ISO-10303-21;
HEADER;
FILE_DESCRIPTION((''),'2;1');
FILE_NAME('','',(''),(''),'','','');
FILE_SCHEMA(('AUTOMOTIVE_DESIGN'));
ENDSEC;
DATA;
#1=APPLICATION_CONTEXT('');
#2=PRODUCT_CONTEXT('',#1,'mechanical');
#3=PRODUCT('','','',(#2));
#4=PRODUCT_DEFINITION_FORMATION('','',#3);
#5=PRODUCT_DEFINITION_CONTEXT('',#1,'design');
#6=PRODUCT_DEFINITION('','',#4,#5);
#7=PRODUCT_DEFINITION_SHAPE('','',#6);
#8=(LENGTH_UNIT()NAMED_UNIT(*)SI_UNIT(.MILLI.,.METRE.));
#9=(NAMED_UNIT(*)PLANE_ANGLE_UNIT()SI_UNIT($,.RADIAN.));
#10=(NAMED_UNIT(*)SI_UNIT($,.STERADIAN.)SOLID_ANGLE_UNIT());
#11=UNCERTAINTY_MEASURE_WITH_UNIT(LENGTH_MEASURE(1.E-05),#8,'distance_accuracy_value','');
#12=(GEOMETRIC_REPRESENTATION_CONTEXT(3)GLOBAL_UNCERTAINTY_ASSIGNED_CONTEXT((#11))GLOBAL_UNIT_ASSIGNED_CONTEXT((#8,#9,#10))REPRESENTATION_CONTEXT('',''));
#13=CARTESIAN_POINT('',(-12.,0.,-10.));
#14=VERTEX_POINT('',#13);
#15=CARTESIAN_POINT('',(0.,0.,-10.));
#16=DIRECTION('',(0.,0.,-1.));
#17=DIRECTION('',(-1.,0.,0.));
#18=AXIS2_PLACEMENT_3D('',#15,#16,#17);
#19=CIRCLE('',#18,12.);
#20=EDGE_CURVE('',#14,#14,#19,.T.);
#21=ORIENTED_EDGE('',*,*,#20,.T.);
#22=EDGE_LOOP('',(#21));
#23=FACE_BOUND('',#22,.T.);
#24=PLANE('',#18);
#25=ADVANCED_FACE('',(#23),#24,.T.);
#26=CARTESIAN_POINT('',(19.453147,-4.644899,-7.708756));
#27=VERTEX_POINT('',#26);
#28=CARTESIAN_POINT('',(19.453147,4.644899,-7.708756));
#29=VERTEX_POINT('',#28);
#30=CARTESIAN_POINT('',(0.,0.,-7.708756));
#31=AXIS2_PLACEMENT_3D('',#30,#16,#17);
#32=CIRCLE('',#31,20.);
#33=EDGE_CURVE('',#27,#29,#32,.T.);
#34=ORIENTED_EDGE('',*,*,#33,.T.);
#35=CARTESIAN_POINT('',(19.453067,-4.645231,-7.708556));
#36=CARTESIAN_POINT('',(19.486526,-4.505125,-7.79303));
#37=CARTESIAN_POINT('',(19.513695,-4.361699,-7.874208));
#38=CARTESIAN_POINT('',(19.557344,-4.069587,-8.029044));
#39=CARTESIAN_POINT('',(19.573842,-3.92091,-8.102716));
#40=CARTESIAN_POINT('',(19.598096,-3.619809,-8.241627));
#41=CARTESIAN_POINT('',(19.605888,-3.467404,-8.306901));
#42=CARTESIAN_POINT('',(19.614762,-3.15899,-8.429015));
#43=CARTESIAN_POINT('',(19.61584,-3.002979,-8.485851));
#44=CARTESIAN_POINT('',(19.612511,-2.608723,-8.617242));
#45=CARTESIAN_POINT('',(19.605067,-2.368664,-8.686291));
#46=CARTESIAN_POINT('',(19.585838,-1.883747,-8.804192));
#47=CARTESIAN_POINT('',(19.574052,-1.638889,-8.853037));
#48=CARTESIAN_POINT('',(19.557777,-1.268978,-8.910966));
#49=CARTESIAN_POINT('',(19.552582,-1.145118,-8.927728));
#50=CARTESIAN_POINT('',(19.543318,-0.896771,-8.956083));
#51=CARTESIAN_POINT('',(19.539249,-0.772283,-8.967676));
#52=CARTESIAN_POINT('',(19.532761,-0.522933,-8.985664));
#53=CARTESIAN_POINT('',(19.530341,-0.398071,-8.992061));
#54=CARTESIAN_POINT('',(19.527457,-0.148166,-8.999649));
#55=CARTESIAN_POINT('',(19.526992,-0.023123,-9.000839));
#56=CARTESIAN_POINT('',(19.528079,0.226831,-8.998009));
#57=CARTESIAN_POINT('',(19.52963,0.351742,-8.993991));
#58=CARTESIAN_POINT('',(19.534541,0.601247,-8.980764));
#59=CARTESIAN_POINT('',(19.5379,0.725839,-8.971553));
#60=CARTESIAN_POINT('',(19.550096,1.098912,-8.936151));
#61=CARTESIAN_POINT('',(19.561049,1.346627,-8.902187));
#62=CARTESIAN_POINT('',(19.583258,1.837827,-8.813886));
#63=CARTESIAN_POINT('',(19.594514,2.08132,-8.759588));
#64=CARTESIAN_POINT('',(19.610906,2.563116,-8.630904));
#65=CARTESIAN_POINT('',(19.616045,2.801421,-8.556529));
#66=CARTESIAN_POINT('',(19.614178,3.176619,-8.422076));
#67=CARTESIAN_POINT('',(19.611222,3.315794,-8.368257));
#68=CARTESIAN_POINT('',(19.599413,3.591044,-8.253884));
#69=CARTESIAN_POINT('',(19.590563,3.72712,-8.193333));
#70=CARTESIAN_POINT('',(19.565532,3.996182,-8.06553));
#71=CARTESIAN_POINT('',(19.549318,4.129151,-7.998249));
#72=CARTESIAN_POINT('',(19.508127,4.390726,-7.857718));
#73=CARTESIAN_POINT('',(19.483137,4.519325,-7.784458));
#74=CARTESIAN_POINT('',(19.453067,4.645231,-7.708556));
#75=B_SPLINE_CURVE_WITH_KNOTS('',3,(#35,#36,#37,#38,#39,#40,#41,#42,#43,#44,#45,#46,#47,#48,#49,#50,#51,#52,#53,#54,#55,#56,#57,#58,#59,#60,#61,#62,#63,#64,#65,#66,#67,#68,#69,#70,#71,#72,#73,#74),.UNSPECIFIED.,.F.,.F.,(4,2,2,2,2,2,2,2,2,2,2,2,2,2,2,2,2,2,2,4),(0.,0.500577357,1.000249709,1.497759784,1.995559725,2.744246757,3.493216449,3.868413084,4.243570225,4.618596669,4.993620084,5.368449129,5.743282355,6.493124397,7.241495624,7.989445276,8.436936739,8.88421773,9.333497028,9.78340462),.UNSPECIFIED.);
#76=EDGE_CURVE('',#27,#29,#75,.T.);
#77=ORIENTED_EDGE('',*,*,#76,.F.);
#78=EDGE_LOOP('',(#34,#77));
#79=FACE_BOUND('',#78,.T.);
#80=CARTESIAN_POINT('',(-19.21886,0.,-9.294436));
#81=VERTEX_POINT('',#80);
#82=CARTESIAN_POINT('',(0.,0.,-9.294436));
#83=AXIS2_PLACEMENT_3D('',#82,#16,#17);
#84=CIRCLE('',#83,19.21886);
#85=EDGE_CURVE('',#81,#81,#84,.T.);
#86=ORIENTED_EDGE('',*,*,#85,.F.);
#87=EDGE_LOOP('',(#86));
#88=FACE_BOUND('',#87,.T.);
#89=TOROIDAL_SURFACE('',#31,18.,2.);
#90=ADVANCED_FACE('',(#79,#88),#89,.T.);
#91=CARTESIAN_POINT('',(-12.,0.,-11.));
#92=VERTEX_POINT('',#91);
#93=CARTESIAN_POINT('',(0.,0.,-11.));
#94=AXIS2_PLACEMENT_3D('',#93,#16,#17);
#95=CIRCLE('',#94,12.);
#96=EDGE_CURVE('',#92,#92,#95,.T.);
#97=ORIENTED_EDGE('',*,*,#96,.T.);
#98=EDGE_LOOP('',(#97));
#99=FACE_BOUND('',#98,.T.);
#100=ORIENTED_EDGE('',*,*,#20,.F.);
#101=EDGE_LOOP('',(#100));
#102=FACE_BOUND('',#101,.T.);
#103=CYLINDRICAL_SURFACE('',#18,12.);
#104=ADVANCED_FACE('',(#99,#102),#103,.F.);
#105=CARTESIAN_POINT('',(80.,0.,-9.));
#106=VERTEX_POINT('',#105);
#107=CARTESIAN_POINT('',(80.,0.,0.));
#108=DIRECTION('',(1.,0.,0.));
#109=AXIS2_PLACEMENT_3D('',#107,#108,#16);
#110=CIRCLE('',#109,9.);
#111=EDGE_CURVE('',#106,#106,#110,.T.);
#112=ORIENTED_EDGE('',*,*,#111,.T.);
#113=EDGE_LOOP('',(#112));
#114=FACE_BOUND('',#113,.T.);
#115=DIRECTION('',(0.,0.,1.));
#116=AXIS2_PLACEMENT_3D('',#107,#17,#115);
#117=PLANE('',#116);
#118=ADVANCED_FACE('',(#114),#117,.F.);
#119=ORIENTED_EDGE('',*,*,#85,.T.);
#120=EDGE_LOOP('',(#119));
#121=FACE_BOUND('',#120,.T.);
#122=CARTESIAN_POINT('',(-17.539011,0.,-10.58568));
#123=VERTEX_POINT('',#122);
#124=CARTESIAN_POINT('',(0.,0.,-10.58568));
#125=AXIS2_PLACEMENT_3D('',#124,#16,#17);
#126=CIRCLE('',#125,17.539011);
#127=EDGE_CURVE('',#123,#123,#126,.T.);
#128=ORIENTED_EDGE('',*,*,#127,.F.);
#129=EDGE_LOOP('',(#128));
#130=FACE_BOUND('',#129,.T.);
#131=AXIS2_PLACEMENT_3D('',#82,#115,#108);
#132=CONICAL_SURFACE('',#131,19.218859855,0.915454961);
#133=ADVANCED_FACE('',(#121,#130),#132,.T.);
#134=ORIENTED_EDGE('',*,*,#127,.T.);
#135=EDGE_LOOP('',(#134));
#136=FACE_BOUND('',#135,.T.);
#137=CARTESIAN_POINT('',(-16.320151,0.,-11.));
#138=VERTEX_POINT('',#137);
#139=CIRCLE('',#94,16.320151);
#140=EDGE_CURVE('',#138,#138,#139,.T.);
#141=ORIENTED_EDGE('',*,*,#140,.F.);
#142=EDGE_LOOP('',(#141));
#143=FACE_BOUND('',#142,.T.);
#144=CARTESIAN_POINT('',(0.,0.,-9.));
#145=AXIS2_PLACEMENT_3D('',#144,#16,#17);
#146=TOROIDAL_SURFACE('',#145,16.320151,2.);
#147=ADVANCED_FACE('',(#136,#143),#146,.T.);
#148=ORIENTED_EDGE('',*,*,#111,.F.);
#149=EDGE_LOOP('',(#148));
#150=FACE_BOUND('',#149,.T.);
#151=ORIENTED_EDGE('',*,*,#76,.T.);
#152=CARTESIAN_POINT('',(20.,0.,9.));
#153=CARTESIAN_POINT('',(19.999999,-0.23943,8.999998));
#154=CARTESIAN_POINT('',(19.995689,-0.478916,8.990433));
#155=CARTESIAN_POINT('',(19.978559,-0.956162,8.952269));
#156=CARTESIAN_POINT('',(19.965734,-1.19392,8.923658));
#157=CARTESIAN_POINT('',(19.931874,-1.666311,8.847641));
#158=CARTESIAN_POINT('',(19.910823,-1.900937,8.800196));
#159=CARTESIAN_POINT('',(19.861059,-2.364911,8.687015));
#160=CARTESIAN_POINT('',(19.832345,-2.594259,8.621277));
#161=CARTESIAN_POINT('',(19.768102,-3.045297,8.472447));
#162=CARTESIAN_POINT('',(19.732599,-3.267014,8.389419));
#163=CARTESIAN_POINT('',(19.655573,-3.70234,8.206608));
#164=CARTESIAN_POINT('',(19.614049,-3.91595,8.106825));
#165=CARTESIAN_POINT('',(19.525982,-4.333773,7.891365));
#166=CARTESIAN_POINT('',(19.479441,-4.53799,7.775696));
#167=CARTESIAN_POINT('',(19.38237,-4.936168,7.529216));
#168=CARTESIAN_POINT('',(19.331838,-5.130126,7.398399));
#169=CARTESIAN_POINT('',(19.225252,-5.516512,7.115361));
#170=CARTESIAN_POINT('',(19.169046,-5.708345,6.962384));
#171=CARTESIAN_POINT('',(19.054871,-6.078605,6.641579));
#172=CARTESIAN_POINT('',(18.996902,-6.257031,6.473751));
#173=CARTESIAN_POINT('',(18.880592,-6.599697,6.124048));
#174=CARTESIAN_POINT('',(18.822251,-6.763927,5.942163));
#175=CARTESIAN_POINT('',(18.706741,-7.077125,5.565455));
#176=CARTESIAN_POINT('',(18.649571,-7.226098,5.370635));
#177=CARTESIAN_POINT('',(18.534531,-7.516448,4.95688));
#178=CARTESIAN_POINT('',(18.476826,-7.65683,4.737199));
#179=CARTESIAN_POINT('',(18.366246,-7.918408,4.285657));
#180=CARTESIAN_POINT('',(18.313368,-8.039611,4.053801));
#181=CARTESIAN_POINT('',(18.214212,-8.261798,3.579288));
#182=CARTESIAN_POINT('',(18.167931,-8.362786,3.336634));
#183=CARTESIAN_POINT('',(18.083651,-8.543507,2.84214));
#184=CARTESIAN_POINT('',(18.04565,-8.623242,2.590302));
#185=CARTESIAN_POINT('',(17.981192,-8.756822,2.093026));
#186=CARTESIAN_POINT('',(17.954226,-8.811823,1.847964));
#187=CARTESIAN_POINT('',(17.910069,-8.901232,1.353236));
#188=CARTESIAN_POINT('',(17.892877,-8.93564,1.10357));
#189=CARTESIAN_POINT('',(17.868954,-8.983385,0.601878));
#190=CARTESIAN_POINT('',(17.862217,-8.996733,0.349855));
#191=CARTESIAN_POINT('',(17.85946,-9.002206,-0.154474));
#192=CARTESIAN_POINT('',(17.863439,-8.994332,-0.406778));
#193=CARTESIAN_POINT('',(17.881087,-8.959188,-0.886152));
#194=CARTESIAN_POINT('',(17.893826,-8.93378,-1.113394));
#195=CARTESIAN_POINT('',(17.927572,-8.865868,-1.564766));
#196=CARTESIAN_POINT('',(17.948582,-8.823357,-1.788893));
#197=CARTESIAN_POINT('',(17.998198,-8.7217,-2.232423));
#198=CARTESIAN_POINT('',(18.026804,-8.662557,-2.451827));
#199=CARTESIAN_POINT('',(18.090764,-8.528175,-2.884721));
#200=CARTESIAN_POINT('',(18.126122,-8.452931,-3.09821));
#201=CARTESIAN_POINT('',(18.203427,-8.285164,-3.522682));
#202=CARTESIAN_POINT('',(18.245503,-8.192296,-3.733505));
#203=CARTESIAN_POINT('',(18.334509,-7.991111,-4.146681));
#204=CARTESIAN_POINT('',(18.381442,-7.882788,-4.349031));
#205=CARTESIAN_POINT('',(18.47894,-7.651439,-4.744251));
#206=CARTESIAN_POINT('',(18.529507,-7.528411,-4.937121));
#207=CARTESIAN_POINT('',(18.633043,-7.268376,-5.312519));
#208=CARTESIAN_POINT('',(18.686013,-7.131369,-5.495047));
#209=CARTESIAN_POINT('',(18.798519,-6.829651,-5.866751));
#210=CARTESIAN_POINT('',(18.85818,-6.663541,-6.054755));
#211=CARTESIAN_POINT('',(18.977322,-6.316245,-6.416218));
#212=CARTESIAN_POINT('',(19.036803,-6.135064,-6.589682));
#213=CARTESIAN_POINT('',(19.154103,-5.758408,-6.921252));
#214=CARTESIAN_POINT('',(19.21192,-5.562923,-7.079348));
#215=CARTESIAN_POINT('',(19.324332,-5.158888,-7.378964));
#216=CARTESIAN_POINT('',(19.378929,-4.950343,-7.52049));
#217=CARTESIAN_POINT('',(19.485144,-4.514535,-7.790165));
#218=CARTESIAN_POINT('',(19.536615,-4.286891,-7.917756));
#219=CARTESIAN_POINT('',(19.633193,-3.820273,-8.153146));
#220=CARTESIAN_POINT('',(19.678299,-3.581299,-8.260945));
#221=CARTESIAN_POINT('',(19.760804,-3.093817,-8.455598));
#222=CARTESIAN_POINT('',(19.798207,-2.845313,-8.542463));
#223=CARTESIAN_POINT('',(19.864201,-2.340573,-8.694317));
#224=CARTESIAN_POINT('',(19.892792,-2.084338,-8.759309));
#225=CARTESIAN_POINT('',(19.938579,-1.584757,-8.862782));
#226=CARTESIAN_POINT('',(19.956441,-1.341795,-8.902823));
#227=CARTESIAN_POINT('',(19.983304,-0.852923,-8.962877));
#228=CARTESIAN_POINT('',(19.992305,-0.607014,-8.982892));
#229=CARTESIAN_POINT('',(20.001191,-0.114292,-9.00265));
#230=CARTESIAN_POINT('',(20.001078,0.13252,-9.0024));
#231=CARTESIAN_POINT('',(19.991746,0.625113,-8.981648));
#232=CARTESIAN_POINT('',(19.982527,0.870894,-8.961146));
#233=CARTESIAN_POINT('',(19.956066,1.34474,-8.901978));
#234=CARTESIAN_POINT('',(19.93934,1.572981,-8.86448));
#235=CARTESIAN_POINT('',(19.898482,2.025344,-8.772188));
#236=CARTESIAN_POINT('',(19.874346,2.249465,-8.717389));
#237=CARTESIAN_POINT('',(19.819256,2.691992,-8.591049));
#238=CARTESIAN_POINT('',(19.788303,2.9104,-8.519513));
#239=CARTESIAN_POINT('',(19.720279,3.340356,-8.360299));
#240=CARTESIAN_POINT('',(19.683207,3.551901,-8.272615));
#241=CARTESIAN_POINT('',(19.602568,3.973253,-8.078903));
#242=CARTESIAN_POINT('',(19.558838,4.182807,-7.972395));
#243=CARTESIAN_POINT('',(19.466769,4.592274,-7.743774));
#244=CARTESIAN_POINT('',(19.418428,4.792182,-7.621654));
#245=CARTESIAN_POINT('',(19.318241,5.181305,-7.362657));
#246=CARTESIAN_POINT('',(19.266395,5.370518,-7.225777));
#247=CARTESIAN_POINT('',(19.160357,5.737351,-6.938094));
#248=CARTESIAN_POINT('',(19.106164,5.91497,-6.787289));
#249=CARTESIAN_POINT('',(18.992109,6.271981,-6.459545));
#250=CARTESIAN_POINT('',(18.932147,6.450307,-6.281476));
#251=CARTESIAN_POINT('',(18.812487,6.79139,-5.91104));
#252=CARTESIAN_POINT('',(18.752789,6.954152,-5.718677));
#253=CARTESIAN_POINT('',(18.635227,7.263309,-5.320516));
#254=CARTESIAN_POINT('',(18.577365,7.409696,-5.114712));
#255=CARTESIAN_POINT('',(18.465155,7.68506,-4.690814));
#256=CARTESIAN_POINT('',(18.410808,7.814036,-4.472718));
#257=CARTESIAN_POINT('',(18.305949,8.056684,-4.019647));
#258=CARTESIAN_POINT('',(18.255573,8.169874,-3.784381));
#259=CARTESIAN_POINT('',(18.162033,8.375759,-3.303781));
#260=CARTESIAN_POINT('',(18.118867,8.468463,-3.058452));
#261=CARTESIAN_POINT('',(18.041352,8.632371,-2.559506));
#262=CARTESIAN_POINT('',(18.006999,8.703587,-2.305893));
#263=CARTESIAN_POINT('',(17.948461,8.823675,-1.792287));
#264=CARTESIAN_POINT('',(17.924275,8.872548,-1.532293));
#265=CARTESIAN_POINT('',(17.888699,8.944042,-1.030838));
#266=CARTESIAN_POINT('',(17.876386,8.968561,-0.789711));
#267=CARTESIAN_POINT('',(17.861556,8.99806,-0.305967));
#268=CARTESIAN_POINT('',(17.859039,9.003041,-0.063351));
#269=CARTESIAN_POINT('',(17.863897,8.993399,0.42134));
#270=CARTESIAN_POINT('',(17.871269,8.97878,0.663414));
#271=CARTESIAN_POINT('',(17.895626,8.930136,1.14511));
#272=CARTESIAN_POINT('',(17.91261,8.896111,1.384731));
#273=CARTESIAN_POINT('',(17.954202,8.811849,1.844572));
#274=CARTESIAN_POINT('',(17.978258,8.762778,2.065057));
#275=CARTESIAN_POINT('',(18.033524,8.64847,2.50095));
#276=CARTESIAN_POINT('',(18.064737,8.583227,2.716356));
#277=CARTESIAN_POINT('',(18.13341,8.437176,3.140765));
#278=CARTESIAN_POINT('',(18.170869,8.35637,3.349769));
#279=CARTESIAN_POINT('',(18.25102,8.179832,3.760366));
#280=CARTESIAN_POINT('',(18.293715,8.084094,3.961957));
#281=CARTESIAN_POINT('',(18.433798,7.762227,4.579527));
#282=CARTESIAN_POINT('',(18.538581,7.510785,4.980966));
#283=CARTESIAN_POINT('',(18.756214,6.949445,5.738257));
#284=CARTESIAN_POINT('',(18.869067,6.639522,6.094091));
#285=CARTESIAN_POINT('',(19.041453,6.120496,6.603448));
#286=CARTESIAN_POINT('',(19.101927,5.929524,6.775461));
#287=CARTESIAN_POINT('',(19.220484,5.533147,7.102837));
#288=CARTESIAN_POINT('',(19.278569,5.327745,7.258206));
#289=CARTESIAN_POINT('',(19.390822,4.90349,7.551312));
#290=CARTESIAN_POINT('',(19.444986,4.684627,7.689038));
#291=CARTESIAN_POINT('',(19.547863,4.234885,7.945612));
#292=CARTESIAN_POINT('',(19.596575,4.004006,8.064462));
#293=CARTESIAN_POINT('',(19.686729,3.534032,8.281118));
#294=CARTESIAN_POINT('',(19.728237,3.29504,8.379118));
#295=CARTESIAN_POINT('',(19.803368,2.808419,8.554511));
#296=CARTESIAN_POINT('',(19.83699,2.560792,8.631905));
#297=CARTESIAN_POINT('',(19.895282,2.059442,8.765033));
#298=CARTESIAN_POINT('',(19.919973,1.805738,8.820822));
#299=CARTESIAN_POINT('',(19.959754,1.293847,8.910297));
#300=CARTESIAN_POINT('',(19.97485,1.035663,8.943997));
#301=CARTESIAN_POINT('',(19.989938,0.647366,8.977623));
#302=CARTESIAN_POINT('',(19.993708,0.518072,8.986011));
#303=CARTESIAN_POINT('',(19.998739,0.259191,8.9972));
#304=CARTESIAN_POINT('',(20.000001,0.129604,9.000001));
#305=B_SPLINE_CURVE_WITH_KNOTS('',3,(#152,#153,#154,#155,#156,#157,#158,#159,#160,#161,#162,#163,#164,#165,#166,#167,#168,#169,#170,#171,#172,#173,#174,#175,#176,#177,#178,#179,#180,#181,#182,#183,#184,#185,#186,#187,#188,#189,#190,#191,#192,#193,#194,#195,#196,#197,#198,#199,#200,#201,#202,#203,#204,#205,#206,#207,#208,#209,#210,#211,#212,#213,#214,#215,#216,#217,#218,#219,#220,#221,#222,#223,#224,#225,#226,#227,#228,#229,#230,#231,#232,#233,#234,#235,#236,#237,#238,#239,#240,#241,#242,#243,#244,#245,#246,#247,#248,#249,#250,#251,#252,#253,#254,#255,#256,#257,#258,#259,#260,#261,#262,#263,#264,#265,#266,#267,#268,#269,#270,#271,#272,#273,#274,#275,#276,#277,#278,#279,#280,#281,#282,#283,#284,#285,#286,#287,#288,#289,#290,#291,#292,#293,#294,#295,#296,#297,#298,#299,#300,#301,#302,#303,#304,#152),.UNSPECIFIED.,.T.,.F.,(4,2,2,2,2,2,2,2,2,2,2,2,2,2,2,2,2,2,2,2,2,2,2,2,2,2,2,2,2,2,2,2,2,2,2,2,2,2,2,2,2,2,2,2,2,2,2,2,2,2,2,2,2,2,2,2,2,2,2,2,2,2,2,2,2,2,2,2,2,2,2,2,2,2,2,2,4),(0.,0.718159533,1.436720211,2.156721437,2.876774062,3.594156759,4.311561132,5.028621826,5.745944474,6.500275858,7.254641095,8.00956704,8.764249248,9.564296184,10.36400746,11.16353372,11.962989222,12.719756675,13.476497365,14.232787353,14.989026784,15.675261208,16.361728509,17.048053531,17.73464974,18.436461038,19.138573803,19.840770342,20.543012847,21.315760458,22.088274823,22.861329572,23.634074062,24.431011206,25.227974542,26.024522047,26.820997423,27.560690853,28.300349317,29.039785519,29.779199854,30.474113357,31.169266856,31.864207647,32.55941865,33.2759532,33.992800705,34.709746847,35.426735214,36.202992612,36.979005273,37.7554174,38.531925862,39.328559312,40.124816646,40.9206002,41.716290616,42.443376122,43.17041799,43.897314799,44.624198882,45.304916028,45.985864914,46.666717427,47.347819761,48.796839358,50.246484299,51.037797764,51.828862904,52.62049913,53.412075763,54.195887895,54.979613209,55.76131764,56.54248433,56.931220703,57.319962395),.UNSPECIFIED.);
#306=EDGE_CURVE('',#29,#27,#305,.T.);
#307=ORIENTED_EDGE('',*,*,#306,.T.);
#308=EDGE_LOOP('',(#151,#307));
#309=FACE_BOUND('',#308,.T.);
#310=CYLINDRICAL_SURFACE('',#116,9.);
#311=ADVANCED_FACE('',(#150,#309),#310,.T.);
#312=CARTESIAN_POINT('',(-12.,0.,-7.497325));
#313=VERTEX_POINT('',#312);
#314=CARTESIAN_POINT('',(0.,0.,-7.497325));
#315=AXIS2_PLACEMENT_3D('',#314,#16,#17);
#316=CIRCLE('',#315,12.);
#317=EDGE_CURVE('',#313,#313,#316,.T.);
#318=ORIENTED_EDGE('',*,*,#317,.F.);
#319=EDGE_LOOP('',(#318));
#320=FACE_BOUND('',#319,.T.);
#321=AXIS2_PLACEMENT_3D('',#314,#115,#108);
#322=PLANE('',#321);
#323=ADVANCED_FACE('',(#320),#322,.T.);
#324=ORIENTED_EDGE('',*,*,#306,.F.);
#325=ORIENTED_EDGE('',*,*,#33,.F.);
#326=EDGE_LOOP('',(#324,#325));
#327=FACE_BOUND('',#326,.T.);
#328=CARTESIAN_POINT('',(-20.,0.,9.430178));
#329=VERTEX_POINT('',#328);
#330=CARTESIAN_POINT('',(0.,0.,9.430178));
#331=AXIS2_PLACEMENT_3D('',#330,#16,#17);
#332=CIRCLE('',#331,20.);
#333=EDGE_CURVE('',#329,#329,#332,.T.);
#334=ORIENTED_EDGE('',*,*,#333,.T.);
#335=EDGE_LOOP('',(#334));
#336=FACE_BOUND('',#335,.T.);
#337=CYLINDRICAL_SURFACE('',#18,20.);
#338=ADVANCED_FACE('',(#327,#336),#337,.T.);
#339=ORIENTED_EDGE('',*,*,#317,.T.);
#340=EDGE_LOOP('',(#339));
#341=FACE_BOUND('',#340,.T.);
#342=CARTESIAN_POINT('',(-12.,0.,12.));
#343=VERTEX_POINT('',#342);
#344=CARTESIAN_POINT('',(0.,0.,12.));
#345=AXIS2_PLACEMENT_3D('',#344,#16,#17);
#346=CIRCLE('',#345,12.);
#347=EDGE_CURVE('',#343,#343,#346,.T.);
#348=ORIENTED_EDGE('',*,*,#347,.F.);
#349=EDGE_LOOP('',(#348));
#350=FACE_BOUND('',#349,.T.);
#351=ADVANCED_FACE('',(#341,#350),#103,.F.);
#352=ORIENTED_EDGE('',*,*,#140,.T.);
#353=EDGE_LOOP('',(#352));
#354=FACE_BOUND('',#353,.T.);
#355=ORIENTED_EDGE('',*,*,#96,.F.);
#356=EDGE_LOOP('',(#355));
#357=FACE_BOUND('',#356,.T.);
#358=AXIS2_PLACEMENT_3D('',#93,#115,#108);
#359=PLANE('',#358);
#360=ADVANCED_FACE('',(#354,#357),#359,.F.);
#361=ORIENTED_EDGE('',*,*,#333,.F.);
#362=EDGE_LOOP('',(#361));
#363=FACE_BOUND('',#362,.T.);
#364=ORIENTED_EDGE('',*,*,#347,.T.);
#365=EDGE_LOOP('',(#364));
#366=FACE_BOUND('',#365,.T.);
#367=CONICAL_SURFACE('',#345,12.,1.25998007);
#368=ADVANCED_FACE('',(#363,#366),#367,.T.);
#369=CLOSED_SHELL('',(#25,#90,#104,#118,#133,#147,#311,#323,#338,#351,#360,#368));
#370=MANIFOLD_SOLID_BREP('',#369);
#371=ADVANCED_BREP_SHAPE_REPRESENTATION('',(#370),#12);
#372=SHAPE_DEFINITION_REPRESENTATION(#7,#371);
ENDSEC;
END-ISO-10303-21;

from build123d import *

# Parameters (mm, degrees)
F_3DSKETCH1_R       = 9
BOSS_EXTRUDE3_DEPTH = 65


with BuildPart() as part:
    # Sketch2 → Revolve1 (revolve)
    with BuildSketch(Plane(origin=(0, 0, 0), x_dir=(1, 0, 0), z_dir=(0, 1, 0))):
        with BuildLine():
            Line((12, -12), (20, -9.430177972))
            Line((20, -9.430177972), (20, 7.708755689))
            ThreePointArc((20, 7.708755689), (19.794118127, 8.59257702), (19.218859855, 9.29443556))
            Line((19.218859855, 9.29443556), (17.53901118, 10.585679871))
            ThreePointArc((17.53901118, 10.585679871), (16.963828362, 10.893589151), (16.320151325, 11))
            Line((16.320151325, 11), (12, 11))
            Line((12, 11), (12, 10))
            Line((12, 10), (0, 10))
            Line((0, 10), (0, 7.49732498))
            Line((0, 7.49732498), (12, 7.49732498))
            Line((12, 7.49732498), (12, -12))
        make_face()
    revolve(axis=Axis((0, 0, -10), (0, 0, 1)))

    # 3DSketch1 → Boss-Extrude3 (add)
    with BuildSketch(Plane(origin=(80, 0, 0), x_dir=(0, 0, 1), z_dir=(1, 0, 0))):
        Circle(F_3DSKETCH1_R)
    extrude(amount=-BOSS_EXTRUDE3_DEPTH)


solid = part.part
